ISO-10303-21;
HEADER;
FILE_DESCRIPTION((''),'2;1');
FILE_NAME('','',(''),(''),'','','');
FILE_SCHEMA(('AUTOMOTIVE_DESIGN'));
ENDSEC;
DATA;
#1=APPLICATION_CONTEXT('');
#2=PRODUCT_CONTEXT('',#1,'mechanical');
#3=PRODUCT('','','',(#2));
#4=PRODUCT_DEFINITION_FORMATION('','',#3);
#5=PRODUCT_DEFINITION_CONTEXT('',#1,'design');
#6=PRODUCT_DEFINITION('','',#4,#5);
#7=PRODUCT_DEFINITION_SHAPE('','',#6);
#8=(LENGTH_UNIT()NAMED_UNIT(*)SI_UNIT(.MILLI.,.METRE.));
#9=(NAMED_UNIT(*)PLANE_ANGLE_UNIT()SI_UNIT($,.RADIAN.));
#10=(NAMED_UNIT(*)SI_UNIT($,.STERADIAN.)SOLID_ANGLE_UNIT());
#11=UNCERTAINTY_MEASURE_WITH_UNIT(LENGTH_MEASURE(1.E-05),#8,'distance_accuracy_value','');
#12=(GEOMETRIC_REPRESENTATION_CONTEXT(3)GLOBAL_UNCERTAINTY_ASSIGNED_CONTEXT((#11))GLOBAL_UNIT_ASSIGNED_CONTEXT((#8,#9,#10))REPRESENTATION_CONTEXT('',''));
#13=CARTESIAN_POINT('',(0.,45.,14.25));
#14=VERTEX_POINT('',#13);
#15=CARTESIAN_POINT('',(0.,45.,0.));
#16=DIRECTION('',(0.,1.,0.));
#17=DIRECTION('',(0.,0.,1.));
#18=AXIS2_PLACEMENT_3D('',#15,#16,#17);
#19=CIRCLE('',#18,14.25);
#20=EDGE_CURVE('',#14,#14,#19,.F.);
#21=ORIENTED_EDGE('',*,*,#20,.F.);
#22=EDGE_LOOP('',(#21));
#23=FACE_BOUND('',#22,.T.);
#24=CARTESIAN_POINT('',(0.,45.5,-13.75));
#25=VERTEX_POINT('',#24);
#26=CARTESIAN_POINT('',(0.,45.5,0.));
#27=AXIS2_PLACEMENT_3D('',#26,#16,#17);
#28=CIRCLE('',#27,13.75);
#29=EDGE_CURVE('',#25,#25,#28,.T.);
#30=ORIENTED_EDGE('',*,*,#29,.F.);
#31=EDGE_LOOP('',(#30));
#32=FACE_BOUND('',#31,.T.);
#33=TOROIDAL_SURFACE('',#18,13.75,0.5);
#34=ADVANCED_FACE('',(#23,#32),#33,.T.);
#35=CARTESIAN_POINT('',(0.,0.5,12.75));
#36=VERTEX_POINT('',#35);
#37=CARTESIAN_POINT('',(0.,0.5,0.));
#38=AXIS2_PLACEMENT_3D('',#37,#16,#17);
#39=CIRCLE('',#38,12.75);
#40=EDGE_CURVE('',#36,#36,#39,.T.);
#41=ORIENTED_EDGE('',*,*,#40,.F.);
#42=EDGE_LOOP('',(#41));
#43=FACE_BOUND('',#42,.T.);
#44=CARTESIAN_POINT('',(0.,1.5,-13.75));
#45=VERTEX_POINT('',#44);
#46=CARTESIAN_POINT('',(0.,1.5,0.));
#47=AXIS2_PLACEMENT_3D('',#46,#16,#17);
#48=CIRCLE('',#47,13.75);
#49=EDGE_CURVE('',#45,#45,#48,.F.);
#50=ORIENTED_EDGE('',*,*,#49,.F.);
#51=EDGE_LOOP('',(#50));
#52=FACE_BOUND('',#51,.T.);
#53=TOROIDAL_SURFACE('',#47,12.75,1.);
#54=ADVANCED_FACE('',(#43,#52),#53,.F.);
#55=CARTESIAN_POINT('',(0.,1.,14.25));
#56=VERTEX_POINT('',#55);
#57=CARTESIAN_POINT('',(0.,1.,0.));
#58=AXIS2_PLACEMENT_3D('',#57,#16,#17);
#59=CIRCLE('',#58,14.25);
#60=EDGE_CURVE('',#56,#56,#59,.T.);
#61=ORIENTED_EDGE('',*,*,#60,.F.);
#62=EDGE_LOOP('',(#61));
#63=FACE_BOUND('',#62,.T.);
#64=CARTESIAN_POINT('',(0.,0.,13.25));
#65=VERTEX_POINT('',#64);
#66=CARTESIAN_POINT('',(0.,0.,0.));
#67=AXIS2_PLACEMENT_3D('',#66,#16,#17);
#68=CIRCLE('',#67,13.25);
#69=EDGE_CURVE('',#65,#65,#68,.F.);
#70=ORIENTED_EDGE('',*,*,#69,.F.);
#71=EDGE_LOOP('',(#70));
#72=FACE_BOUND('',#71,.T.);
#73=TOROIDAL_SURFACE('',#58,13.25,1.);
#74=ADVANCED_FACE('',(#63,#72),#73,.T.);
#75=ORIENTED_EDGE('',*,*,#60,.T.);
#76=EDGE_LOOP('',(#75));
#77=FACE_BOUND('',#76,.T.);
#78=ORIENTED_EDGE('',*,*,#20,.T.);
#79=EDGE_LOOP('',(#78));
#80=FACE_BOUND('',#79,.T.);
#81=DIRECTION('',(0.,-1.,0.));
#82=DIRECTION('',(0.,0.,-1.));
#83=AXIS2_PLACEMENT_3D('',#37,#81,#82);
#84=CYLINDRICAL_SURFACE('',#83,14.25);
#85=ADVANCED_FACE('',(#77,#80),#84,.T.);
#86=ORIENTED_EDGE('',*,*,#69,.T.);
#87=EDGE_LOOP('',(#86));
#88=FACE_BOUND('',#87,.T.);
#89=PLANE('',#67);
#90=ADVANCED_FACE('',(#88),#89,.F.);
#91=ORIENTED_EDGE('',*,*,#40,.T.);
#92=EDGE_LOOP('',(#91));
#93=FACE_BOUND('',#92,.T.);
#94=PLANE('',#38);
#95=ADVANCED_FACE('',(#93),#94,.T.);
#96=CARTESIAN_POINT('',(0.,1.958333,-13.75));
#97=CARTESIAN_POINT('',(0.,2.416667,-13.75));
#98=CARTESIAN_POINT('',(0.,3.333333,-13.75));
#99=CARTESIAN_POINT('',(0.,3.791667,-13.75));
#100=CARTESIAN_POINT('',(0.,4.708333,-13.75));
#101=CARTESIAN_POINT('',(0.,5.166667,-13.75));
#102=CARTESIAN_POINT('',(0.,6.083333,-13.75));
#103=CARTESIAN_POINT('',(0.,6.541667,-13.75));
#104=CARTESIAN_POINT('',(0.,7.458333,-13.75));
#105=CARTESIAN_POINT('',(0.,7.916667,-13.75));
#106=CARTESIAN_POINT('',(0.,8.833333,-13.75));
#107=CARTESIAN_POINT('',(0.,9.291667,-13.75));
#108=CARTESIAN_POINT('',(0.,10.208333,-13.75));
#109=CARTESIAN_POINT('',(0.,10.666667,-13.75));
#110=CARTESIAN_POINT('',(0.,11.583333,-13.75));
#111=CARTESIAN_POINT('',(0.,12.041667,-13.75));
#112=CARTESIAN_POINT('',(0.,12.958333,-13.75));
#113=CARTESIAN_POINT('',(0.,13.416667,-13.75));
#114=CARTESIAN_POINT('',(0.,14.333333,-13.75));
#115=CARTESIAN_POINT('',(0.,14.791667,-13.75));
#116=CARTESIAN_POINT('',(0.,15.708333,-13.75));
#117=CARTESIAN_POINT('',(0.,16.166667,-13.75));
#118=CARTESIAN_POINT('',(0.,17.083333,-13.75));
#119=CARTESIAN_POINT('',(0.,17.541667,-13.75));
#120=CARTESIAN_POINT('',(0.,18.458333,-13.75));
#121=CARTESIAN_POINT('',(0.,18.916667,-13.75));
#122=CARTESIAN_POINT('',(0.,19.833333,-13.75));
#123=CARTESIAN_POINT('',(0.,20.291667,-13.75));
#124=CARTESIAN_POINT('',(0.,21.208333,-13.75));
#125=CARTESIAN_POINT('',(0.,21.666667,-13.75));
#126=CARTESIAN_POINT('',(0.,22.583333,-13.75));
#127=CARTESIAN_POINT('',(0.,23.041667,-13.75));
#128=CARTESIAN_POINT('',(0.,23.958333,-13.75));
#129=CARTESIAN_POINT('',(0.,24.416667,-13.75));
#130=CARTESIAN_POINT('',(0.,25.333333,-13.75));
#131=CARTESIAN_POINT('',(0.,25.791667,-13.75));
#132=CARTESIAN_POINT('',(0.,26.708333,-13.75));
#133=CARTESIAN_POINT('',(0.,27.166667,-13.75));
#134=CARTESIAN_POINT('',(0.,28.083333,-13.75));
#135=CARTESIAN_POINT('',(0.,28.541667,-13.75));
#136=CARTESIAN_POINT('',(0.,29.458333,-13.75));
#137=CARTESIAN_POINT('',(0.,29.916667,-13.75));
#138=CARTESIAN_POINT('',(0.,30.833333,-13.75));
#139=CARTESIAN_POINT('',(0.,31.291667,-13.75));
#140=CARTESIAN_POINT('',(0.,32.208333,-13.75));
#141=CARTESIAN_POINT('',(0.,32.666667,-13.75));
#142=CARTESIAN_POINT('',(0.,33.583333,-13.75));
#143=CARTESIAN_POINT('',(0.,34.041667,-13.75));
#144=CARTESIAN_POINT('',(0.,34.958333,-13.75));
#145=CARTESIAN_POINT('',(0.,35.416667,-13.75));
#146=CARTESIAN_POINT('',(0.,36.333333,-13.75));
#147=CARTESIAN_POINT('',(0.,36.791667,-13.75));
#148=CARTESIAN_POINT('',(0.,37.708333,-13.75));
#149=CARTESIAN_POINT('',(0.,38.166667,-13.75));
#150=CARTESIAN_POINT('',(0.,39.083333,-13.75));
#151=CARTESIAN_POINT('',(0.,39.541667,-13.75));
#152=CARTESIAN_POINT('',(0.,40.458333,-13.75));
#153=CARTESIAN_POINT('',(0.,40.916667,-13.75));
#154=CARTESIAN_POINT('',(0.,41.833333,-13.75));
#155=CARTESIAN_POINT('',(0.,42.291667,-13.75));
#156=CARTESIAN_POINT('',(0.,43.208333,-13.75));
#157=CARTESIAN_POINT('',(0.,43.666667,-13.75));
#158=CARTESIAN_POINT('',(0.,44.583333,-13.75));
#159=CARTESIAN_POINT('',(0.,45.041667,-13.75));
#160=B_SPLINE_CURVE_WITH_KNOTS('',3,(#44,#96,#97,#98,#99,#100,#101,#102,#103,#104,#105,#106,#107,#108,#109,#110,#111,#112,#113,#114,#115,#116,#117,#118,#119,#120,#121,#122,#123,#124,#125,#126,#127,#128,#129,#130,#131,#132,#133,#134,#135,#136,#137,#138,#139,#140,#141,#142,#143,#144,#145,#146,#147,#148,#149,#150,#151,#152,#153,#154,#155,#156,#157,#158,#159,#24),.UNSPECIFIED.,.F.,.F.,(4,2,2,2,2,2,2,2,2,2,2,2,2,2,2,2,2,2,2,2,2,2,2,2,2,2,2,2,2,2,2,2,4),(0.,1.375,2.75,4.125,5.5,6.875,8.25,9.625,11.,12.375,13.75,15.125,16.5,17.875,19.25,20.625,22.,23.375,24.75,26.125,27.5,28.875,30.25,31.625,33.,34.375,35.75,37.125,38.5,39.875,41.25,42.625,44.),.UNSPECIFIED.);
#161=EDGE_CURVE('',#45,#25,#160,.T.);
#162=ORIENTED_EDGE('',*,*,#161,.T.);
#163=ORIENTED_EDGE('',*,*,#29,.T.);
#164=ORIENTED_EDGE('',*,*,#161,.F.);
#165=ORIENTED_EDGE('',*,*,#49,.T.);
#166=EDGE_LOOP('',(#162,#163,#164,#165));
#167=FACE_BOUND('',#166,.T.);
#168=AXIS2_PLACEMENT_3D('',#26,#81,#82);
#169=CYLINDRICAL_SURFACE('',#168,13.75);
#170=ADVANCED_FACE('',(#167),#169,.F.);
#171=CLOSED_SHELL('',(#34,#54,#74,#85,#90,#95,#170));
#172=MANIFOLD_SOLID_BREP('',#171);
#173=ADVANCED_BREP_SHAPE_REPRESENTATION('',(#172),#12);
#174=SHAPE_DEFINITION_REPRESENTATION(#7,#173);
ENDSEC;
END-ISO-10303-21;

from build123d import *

# Parameters (mm, degrees)
SKETCH1_R           = 14.25
BOSS_EXTRUDE1_DEPTH = 0.5
SKETCH2_R           = 14.25
SKETCH2_R_2         = 13.75
BOSS_EXTRUDE2_DEPTH = 45
FILLET1_R           = 1
FILLET2_R           = 0.5


with BuildPart() as part:
    # Sketch1 → Boss-Extrude1 (new body)
    with BuildSketch(Plane(origin=(0, 0, 0), x_dir=(1, 0, 0), z_dir=(0, 1, 0))):
        with Locations(Location((0, 0, 0), (0, 0, 270))):
            Circle(SKETCH1_R)
    extrude(amount=BOSS_EXTRUDE1_DEPTH)

    # Sketch2 → Boss-Extrude2 (add)
    with BuildSketch(Plane(origin=(0, 0.5, 0), x_dir=(1, 0, 0), z_dir=(0, 1, 0))):
        with Locations(Location((0, 0, 0), (0, 0, 270))):
            Circle(SKETCH2_R)
        with Locations(Location((0, 0, 0), (0, 0, 90))):
            Circle(SKETCH2_R_2, mode=Mode.SUBTRACT)
    extrude(amount=BOSS_EXTRUDE2_DEPTH)

    # Fillet1
    fillet1_edges = [part.edges().sort_by_distance(p)[0] for p in [
        (0, 0, -14.25),
        (0, 0.5, 13.75),
    ]]
    fillet(fillet1_edges, radius=FILLET1_R)

    # Fillet2
    fillet2_edges = [part.edges().sort_by_distance(p)[0] for p in [
        (0, 45.5, -14.25),
    ]]
    fillet(fillet2_edges, radius=FILLET2_R - 0.0001)  # a hair under: the kernel refuses the full size


solid = part.part
